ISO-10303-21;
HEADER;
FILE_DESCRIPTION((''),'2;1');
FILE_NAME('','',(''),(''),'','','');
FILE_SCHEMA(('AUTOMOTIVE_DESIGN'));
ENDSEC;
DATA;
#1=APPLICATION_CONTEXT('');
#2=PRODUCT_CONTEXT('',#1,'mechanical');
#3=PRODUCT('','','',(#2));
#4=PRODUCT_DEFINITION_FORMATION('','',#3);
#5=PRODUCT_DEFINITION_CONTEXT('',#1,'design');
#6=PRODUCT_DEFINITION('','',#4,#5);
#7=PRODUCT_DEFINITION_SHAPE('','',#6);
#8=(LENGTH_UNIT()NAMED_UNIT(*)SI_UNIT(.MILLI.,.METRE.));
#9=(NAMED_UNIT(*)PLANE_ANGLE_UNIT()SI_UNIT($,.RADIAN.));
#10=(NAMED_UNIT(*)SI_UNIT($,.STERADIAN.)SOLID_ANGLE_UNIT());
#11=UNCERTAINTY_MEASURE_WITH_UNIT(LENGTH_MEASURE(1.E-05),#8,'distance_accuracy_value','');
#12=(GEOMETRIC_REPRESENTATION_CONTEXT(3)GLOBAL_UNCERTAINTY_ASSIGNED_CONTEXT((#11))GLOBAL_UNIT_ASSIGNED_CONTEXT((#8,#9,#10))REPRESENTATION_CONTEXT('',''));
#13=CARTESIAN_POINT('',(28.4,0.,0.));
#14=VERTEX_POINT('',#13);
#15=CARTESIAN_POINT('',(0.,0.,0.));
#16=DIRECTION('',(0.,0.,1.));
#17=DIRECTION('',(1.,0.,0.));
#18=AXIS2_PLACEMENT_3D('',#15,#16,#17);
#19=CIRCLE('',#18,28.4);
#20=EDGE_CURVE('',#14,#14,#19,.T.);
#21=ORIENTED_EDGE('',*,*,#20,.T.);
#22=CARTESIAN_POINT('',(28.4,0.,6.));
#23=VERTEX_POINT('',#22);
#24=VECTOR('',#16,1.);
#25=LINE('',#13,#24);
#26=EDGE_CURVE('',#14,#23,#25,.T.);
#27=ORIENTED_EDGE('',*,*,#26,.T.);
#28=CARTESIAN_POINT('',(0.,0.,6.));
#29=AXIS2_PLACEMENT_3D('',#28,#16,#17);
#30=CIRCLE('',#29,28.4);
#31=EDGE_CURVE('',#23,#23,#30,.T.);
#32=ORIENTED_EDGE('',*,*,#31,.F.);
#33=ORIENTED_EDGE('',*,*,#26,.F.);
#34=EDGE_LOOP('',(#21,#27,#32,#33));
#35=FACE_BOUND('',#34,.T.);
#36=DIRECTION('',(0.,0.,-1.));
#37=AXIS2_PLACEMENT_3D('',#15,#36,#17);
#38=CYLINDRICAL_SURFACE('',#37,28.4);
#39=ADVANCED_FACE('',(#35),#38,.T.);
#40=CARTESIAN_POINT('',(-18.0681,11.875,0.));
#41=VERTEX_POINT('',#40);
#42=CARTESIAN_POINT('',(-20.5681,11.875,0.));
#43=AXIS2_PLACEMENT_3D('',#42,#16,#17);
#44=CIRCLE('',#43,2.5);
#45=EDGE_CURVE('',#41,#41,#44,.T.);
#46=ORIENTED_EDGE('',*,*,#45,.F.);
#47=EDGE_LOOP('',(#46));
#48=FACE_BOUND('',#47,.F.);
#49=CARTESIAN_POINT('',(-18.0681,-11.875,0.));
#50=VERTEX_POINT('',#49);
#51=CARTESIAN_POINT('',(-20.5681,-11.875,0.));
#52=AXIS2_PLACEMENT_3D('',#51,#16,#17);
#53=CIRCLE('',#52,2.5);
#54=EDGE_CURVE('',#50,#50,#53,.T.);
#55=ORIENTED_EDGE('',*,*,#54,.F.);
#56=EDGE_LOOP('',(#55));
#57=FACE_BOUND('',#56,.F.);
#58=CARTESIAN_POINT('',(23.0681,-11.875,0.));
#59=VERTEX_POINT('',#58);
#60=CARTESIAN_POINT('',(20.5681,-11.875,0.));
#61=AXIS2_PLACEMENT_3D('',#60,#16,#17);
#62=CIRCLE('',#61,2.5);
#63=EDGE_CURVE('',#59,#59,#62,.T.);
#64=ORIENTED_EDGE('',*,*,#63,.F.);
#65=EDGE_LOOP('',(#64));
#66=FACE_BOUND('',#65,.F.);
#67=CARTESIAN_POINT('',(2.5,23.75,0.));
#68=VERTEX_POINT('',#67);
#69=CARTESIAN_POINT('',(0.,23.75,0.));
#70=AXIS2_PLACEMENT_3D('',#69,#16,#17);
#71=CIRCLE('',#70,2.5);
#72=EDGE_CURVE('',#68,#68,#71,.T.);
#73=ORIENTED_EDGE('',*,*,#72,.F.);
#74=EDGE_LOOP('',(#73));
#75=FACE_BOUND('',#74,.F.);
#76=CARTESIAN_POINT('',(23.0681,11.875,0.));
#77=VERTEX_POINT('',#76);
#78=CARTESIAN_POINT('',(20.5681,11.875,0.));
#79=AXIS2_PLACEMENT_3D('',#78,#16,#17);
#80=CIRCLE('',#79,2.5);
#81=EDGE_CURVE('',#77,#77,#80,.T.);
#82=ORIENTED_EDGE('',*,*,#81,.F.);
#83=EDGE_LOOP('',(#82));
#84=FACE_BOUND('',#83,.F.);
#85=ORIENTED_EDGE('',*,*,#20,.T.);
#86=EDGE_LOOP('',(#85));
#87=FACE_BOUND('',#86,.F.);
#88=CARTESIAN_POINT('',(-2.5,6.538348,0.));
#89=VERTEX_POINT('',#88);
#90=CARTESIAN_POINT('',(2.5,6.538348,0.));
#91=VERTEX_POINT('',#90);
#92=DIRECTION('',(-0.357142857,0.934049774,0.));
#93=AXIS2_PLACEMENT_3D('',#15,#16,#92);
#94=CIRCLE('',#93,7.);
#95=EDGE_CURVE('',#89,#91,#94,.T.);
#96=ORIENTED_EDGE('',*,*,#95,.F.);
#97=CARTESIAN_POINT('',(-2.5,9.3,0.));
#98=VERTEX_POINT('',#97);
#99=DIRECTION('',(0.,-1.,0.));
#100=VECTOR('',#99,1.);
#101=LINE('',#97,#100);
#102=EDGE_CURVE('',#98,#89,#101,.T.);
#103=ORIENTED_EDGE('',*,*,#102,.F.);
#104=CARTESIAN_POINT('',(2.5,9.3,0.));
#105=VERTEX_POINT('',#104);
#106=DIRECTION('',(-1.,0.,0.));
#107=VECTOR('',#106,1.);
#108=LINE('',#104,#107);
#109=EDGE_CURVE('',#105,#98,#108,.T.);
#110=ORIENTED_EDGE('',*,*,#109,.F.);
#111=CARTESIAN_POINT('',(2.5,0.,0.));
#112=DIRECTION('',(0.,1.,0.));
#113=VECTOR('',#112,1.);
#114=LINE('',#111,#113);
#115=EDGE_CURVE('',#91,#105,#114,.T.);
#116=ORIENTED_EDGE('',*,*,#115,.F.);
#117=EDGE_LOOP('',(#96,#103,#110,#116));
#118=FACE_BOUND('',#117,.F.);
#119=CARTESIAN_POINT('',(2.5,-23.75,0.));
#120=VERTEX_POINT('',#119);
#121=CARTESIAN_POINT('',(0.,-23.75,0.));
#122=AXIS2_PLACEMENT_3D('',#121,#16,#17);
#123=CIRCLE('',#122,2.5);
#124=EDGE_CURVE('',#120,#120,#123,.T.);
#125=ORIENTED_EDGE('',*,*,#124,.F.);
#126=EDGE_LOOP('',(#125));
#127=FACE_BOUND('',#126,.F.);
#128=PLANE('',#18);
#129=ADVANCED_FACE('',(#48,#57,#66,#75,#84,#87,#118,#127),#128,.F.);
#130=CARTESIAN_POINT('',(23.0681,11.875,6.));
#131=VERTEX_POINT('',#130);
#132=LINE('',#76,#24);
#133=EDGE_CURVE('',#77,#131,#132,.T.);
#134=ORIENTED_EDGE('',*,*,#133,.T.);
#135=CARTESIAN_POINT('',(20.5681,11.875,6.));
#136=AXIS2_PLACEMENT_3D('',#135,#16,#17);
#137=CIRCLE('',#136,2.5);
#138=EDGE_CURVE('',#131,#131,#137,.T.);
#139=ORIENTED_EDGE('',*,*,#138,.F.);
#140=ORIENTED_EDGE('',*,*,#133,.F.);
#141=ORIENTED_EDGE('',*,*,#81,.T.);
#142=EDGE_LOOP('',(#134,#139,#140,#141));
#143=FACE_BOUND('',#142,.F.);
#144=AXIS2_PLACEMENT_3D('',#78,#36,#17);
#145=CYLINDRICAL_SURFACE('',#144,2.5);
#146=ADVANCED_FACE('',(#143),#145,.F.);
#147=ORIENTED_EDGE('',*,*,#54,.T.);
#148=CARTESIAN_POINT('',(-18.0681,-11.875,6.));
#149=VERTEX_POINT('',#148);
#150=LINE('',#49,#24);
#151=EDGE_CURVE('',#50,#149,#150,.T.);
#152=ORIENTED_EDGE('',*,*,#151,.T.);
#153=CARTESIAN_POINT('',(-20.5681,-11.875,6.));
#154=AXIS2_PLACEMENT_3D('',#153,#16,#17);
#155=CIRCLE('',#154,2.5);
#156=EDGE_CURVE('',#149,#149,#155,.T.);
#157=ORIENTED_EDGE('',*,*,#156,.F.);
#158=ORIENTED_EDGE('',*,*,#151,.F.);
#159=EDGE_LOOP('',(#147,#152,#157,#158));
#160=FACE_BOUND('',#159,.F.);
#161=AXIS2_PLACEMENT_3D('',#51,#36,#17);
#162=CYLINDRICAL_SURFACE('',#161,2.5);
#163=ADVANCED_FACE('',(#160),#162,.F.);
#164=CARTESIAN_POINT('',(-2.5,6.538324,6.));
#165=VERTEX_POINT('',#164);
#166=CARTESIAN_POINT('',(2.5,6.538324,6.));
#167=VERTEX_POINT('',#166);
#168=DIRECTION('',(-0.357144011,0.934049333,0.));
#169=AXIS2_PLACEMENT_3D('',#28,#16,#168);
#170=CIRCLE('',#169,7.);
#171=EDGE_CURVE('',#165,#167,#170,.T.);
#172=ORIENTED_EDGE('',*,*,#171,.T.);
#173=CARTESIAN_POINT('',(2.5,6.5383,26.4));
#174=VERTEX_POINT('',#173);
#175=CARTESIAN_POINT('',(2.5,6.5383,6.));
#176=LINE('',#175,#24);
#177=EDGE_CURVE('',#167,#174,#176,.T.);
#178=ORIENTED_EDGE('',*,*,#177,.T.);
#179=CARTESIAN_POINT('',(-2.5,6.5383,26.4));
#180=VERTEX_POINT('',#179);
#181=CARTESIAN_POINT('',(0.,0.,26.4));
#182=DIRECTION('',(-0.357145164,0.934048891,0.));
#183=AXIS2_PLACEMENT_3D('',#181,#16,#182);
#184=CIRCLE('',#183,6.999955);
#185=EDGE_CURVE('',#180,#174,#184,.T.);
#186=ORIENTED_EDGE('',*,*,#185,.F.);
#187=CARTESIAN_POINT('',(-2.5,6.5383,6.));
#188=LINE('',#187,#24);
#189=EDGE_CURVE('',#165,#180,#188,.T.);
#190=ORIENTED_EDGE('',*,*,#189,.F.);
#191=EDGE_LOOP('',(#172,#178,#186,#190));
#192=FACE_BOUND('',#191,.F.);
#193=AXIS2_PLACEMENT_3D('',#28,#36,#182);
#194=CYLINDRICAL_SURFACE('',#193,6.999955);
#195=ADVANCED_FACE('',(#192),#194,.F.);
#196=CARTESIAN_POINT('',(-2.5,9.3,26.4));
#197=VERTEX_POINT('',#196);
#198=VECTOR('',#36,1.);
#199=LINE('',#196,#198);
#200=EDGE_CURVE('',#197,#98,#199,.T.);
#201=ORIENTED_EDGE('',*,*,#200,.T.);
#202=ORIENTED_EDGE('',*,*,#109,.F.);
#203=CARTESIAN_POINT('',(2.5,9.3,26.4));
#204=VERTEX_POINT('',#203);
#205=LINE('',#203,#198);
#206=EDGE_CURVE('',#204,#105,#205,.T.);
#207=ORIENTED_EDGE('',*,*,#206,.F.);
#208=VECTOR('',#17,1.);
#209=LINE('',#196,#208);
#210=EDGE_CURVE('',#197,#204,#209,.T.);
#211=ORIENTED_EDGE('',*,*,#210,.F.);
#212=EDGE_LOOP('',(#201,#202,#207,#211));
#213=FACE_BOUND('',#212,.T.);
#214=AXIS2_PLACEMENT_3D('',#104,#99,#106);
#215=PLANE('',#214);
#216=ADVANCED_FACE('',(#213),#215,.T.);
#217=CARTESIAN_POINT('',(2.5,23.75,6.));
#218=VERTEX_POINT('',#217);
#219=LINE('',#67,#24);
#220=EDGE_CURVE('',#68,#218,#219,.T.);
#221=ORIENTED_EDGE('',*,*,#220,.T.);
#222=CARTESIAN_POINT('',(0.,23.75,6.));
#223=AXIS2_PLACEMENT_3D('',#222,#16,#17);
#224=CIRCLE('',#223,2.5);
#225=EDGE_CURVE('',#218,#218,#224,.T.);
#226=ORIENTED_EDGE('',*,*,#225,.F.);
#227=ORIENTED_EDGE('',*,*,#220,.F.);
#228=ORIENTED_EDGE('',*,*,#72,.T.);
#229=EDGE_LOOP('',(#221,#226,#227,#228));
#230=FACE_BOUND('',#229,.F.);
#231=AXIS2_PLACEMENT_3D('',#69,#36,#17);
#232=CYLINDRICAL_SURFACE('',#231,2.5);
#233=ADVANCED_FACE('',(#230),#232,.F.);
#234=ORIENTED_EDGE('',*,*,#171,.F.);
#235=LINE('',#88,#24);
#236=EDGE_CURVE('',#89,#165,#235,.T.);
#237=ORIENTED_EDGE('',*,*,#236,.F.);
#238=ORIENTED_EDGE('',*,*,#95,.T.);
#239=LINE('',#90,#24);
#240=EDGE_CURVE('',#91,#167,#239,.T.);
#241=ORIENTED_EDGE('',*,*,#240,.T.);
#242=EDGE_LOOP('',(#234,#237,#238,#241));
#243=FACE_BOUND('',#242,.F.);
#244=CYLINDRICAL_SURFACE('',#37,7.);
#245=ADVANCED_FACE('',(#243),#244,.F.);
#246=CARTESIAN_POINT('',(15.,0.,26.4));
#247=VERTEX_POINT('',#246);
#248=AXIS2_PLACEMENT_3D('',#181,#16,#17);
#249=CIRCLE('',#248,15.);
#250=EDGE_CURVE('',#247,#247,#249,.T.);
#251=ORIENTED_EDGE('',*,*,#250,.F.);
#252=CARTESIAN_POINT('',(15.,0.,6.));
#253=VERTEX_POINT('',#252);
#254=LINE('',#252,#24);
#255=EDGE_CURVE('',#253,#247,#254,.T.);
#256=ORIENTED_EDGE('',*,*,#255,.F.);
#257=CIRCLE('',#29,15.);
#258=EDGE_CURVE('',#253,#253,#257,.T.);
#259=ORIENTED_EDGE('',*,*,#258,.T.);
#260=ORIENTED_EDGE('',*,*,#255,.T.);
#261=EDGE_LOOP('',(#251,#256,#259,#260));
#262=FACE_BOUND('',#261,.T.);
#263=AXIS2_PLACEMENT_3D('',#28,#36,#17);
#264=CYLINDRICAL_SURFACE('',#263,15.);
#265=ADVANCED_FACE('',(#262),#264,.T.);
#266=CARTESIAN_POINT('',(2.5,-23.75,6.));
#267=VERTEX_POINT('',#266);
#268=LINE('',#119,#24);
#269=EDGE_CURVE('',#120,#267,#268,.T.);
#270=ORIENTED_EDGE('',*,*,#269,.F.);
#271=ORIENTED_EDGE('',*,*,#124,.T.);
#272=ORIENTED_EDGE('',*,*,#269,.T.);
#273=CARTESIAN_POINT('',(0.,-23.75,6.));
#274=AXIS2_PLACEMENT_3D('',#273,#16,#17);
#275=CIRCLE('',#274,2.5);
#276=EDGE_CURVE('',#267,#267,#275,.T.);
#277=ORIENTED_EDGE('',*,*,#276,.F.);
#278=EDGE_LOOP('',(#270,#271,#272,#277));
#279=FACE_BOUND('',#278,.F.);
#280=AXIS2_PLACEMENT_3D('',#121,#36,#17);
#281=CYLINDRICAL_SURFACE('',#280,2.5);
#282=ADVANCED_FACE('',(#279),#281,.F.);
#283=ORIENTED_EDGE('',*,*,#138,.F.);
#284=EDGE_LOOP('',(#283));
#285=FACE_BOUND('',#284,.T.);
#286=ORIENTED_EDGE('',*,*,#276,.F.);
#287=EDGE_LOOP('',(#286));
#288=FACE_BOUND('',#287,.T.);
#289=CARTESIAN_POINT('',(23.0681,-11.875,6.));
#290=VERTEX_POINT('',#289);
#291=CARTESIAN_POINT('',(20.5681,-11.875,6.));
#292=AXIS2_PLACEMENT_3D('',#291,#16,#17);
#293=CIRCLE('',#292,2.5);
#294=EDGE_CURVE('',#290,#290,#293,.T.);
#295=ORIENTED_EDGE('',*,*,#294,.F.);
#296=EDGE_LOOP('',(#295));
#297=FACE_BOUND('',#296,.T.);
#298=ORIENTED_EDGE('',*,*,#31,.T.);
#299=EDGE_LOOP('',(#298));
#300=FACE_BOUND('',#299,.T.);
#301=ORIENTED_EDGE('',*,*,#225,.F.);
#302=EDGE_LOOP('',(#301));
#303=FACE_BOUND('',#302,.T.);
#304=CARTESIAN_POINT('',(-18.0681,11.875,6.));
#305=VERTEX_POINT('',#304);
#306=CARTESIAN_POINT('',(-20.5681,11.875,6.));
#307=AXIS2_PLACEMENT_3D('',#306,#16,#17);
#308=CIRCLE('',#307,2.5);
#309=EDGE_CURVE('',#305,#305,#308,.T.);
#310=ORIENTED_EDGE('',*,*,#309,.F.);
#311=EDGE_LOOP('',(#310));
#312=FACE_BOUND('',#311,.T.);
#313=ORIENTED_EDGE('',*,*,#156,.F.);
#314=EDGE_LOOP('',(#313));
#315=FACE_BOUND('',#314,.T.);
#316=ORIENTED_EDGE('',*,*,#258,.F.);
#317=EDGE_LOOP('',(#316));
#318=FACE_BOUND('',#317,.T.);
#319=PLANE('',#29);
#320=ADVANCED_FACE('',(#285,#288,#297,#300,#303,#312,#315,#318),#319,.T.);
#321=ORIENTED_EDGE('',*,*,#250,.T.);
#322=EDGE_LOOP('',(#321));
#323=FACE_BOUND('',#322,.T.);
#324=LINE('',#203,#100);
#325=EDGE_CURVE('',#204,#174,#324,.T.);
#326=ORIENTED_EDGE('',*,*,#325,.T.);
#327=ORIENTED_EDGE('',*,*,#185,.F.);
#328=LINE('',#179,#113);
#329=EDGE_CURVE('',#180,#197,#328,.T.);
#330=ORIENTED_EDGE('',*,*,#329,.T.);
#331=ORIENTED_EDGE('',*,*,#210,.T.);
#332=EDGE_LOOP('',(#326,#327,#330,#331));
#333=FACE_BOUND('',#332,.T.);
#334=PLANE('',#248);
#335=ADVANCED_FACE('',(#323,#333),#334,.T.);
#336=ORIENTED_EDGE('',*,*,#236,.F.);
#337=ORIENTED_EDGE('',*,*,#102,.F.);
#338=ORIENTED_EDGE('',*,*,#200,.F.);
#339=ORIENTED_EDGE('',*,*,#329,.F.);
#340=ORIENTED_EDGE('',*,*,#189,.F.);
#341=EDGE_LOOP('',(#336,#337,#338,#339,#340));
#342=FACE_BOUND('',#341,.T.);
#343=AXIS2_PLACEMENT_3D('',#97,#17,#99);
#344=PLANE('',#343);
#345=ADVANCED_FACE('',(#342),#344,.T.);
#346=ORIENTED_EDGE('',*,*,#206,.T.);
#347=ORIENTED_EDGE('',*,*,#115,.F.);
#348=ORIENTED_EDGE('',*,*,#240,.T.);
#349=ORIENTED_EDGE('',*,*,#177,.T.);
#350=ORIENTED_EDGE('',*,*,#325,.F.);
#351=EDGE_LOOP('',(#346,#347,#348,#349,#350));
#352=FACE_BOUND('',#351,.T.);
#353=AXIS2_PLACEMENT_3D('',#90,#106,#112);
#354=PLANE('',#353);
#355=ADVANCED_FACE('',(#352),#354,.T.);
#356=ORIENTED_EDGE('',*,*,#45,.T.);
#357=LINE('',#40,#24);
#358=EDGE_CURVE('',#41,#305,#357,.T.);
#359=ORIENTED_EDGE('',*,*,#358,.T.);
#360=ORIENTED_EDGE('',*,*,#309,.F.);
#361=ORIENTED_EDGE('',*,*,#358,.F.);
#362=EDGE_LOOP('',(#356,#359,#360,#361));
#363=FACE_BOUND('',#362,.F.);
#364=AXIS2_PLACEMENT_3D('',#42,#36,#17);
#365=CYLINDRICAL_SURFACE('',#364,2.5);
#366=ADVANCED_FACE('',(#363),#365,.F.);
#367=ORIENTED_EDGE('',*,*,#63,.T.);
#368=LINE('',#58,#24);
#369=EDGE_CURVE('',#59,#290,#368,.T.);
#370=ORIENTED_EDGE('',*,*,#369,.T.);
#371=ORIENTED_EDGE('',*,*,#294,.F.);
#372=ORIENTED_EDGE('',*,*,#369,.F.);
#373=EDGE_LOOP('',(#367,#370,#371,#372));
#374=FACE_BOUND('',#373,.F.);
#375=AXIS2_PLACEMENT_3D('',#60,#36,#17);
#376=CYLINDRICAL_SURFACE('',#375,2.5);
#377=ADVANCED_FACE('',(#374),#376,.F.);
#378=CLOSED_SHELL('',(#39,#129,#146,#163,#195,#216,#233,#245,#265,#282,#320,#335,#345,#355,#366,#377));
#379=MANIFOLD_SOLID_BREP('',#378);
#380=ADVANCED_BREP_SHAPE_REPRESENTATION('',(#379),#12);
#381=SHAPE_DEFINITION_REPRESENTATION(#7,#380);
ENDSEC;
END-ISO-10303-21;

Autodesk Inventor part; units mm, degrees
ref_plane "YZ Plane" through (0, 0, 0) normal (1, 0, 0) x (0, 1, 0)
ref_plane "XZ Plane" through (0, 0, 0) normal (0, 1, 0) x (-1, 0, 0)
ref_plane "XY Plane" through (0, 0, 0) normal (0, 0, 1) x (1, 0, 0)
sketch "Base" plane through (0, 0, 0) normal (0, 0, 1) x (1, 0, 0)
  circle A0 centre (0, 0) radius 28.4
  circle A1 centre (0, 0) radius 23.75 construction
  circle A2 centre (0, 0) radius 7
  line L0 (-2.5, 0) -> (2.5, 0)
  line L1 (2.5, 0) -> (2.5, 9.3)
  line L2 (2.5, 9.3) -> (-2.5, 9.3)
  line L3 (-2.5, 9.3) -> (-2.5, 0)
  line L4 (0, -39.76) -> (0, 39.76) construction
  circle A3 centre (0, 23.75) radius 2.5
  circle A4 centre (-20.5681, 11.875) radius 2.5
  circle A5 centre (-20.5681, -11.875) radius 2.5
  circle A6 centre (0, -23.75) radius 2.5
  circle A7 centre (20.5681, -11.875) radius 2.5
  circle A8 centre (20.5681, 11.875) radius 2.5
  point P0 (0, 9.3)
  point P1 (2.5, 6.5383)
  point P2 (-2.5, 6.5383)
  dimension "d1" = 47.5
  dimension "d0" = 56.8
  dimension "d2" = 14
  dimension "d3" = 9.3
  dimension "d4" = 5
  dimension "d5" = 5
  dimension "d8" = 360
extrude "BaseFeature" add sketch "Base" along normal blind 6
sketch "Lip" plane through (0, 0, 6) normal (0, 0, 1) x (1, 0, 0)
  arc A0 (-2.5, 6.5383) -> (2.5, 6.5383) centre (0, 0) ccw projected
  circle A1 centre (0, 0) radius 15
  line L0 (-2.5, 6.5383) -> (-2.5, 9.3) projected
  line L1 (2.5, 9.3) -> (2.5, 6.5383) projected
  line L2 (-2.5, 9.3) -> (2.5, 9.3) projected
  dimension "d12" = 30
extrude "LipFeature" add sketch "Lip" along normal blind 20.4
properties part number "NexusRobot14mmKeywayHub"
